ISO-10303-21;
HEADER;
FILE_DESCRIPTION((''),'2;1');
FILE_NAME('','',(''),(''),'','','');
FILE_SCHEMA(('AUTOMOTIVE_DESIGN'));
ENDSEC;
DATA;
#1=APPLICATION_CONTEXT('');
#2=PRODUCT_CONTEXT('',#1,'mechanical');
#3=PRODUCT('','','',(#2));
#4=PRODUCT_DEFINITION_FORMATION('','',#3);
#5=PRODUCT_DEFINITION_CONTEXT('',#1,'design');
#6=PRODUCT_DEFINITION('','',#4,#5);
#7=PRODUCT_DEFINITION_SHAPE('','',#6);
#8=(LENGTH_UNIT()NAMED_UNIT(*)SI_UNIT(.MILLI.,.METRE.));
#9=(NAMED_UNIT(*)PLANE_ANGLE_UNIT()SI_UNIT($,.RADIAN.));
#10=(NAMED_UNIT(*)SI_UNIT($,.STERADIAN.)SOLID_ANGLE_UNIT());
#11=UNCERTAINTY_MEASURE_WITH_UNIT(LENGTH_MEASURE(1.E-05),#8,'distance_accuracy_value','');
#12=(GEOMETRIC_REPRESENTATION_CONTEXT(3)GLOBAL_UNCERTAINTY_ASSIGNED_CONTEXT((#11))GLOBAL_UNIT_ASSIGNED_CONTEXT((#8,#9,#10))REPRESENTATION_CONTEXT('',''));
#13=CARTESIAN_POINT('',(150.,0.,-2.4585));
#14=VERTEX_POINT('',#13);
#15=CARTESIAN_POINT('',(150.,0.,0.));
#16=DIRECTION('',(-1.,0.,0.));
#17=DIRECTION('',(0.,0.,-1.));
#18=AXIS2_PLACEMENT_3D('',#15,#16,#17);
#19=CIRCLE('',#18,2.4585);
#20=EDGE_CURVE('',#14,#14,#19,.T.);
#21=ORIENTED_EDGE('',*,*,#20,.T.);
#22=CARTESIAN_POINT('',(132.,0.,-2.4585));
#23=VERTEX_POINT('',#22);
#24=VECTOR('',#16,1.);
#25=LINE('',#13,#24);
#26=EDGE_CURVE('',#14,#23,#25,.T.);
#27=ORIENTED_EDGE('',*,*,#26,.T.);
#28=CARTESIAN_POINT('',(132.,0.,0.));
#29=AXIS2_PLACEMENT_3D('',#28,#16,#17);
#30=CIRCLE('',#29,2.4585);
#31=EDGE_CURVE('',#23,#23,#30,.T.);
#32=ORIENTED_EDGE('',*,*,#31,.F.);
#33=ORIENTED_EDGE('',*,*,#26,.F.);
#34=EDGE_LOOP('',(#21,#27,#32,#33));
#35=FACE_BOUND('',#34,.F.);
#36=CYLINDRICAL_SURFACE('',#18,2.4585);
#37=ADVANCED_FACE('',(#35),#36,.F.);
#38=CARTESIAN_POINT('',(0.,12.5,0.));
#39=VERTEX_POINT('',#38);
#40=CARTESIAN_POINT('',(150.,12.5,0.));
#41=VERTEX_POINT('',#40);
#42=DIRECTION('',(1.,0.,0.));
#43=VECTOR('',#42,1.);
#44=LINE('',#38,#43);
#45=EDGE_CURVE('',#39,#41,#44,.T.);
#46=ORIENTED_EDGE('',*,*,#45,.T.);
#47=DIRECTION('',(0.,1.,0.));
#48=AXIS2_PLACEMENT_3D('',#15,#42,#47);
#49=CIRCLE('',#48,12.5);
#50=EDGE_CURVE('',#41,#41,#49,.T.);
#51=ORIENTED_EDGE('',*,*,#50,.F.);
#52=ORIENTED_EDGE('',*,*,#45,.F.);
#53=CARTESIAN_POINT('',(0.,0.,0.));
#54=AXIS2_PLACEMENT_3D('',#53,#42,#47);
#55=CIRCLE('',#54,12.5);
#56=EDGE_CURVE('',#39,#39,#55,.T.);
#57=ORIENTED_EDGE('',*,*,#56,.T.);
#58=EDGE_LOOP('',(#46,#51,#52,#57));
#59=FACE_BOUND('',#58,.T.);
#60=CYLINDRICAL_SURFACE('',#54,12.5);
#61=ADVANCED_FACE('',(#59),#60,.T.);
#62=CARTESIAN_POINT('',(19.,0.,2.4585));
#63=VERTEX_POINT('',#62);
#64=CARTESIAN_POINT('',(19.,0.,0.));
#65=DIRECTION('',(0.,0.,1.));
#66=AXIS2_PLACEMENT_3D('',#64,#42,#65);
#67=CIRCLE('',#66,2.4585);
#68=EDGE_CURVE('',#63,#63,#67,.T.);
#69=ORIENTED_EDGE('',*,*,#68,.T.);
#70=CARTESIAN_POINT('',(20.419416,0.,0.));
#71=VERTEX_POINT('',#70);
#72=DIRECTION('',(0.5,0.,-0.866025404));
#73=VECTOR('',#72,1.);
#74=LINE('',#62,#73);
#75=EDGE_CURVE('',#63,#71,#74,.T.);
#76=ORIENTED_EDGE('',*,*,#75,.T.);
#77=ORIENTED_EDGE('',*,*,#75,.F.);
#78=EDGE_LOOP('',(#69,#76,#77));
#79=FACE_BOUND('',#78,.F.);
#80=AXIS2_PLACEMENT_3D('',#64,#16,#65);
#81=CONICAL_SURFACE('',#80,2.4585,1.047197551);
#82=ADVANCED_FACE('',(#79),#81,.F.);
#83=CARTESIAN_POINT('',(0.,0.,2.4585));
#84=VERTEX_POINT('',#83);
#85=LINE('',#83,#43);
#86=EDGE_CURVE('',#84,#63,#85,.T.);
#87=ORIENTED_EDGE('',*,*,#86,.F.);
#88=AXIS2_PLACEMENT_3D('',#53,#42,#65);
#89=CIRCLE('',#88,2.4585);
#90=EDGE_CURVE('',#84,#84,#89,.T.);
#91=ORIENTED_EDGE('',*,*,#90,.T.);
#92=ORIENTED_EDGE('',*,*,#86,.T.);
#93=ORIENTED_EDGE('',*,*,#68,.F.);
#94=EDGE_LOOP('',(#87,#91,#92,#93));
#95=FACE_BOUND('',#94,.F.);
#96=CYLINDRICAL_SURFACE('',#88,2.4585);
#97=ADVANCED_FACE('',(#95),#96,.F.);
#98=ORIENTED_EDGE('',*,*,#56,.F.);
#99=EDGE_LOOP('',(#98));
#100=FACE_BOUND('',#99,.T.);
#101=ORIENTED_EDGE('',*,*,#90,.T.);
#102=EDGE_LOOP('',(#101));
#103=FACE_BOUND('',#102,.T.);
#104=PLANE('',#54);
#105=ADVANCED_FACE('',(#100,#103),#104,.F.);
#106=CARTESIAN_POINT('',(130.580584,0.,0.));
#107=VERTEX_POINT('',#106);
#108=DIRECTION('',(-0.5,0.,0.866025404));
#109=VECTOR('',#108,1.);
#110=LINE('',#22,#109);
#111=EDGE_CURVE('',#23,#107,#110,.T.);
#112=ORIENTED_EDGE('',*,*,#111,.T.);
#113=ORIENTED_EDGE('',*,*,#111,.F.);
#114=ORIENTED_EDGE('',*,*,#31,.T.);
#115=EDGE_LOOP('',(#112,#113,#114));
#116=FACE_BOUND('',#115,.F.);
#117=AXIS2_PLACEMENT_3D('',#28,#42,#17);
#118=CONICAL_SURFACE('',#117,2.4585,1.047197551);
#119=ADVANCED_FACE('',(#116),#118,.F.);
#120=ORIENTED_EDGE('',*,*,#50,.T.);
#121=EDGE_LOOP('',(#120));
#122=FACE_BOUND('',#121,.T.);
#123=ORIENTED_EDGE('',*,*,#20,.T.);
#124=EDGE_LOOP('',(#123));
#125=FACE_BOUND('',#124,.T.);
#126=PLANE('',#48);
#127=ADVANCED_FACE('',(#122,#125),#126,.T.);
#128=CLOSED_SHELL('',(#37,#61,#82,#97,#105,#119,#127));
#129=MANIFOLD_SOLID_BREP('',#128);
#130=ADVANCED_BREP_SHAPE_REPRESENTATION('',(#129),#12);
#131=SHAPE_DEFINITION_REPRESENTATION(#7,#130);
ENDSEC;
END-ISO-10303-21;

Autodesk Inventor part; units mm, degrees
ref_plane "Płaszczyzna początkowa" through (0, 0, 0) normal (1, 0, 0) x (0, 1, 0)
ref_plane "XZ Plane" through (0, 0, 0) normal (0, 1, 0) x (-1, 0, 0)
ref_plane "XY Plane" through (0, 0, 0) normal (0, 0, 1) x (1, 0, 0)
sketch "Szkic główny" plane through (0, 0, 0) normal (0, 0, 1) x (1, 0, 0)
  line L0 (0, 0) -> (150, 0)
  line L1 (0, 0) -> (0, 12.5)
  line L2 (150, 12.5) -> (150, 0)
  line L3 (0, 12.5) -> (150, 12.5)
  dimension "d3" = 25
revolve "Obrót1" add sketch "Szkic główny" angle 360 about axis through (0, 0, 0) along (1, 0, 0)
sketch "Szkic3" plane through (0, 0, 0) normal (-1, 0, 0) x (0, 0, 1)
  point P0 (0, 0)
hole "Otwór1" at (0, 0, 0) direction (1, 0, 0) diameter 4.917 depth 19 tip angle 120 thread size "M6x1" class "6H" standard "ISO Metric profile"
sketch "Szkic4" plane through (150, 0, 0) normal (1, 0, 0) x (0, 0, -1)
  point P0 (0, 0)
hole "Otwór2" at (150, 0, 0) direction (-1, 0, 0) diameter 4.917 depth 18 tip angle 120 thread size "M6x1" class "6H" standard "ISO Metric profile"
equation "\"Length\" = 150"
properties part number "Wał" material "Steel"
